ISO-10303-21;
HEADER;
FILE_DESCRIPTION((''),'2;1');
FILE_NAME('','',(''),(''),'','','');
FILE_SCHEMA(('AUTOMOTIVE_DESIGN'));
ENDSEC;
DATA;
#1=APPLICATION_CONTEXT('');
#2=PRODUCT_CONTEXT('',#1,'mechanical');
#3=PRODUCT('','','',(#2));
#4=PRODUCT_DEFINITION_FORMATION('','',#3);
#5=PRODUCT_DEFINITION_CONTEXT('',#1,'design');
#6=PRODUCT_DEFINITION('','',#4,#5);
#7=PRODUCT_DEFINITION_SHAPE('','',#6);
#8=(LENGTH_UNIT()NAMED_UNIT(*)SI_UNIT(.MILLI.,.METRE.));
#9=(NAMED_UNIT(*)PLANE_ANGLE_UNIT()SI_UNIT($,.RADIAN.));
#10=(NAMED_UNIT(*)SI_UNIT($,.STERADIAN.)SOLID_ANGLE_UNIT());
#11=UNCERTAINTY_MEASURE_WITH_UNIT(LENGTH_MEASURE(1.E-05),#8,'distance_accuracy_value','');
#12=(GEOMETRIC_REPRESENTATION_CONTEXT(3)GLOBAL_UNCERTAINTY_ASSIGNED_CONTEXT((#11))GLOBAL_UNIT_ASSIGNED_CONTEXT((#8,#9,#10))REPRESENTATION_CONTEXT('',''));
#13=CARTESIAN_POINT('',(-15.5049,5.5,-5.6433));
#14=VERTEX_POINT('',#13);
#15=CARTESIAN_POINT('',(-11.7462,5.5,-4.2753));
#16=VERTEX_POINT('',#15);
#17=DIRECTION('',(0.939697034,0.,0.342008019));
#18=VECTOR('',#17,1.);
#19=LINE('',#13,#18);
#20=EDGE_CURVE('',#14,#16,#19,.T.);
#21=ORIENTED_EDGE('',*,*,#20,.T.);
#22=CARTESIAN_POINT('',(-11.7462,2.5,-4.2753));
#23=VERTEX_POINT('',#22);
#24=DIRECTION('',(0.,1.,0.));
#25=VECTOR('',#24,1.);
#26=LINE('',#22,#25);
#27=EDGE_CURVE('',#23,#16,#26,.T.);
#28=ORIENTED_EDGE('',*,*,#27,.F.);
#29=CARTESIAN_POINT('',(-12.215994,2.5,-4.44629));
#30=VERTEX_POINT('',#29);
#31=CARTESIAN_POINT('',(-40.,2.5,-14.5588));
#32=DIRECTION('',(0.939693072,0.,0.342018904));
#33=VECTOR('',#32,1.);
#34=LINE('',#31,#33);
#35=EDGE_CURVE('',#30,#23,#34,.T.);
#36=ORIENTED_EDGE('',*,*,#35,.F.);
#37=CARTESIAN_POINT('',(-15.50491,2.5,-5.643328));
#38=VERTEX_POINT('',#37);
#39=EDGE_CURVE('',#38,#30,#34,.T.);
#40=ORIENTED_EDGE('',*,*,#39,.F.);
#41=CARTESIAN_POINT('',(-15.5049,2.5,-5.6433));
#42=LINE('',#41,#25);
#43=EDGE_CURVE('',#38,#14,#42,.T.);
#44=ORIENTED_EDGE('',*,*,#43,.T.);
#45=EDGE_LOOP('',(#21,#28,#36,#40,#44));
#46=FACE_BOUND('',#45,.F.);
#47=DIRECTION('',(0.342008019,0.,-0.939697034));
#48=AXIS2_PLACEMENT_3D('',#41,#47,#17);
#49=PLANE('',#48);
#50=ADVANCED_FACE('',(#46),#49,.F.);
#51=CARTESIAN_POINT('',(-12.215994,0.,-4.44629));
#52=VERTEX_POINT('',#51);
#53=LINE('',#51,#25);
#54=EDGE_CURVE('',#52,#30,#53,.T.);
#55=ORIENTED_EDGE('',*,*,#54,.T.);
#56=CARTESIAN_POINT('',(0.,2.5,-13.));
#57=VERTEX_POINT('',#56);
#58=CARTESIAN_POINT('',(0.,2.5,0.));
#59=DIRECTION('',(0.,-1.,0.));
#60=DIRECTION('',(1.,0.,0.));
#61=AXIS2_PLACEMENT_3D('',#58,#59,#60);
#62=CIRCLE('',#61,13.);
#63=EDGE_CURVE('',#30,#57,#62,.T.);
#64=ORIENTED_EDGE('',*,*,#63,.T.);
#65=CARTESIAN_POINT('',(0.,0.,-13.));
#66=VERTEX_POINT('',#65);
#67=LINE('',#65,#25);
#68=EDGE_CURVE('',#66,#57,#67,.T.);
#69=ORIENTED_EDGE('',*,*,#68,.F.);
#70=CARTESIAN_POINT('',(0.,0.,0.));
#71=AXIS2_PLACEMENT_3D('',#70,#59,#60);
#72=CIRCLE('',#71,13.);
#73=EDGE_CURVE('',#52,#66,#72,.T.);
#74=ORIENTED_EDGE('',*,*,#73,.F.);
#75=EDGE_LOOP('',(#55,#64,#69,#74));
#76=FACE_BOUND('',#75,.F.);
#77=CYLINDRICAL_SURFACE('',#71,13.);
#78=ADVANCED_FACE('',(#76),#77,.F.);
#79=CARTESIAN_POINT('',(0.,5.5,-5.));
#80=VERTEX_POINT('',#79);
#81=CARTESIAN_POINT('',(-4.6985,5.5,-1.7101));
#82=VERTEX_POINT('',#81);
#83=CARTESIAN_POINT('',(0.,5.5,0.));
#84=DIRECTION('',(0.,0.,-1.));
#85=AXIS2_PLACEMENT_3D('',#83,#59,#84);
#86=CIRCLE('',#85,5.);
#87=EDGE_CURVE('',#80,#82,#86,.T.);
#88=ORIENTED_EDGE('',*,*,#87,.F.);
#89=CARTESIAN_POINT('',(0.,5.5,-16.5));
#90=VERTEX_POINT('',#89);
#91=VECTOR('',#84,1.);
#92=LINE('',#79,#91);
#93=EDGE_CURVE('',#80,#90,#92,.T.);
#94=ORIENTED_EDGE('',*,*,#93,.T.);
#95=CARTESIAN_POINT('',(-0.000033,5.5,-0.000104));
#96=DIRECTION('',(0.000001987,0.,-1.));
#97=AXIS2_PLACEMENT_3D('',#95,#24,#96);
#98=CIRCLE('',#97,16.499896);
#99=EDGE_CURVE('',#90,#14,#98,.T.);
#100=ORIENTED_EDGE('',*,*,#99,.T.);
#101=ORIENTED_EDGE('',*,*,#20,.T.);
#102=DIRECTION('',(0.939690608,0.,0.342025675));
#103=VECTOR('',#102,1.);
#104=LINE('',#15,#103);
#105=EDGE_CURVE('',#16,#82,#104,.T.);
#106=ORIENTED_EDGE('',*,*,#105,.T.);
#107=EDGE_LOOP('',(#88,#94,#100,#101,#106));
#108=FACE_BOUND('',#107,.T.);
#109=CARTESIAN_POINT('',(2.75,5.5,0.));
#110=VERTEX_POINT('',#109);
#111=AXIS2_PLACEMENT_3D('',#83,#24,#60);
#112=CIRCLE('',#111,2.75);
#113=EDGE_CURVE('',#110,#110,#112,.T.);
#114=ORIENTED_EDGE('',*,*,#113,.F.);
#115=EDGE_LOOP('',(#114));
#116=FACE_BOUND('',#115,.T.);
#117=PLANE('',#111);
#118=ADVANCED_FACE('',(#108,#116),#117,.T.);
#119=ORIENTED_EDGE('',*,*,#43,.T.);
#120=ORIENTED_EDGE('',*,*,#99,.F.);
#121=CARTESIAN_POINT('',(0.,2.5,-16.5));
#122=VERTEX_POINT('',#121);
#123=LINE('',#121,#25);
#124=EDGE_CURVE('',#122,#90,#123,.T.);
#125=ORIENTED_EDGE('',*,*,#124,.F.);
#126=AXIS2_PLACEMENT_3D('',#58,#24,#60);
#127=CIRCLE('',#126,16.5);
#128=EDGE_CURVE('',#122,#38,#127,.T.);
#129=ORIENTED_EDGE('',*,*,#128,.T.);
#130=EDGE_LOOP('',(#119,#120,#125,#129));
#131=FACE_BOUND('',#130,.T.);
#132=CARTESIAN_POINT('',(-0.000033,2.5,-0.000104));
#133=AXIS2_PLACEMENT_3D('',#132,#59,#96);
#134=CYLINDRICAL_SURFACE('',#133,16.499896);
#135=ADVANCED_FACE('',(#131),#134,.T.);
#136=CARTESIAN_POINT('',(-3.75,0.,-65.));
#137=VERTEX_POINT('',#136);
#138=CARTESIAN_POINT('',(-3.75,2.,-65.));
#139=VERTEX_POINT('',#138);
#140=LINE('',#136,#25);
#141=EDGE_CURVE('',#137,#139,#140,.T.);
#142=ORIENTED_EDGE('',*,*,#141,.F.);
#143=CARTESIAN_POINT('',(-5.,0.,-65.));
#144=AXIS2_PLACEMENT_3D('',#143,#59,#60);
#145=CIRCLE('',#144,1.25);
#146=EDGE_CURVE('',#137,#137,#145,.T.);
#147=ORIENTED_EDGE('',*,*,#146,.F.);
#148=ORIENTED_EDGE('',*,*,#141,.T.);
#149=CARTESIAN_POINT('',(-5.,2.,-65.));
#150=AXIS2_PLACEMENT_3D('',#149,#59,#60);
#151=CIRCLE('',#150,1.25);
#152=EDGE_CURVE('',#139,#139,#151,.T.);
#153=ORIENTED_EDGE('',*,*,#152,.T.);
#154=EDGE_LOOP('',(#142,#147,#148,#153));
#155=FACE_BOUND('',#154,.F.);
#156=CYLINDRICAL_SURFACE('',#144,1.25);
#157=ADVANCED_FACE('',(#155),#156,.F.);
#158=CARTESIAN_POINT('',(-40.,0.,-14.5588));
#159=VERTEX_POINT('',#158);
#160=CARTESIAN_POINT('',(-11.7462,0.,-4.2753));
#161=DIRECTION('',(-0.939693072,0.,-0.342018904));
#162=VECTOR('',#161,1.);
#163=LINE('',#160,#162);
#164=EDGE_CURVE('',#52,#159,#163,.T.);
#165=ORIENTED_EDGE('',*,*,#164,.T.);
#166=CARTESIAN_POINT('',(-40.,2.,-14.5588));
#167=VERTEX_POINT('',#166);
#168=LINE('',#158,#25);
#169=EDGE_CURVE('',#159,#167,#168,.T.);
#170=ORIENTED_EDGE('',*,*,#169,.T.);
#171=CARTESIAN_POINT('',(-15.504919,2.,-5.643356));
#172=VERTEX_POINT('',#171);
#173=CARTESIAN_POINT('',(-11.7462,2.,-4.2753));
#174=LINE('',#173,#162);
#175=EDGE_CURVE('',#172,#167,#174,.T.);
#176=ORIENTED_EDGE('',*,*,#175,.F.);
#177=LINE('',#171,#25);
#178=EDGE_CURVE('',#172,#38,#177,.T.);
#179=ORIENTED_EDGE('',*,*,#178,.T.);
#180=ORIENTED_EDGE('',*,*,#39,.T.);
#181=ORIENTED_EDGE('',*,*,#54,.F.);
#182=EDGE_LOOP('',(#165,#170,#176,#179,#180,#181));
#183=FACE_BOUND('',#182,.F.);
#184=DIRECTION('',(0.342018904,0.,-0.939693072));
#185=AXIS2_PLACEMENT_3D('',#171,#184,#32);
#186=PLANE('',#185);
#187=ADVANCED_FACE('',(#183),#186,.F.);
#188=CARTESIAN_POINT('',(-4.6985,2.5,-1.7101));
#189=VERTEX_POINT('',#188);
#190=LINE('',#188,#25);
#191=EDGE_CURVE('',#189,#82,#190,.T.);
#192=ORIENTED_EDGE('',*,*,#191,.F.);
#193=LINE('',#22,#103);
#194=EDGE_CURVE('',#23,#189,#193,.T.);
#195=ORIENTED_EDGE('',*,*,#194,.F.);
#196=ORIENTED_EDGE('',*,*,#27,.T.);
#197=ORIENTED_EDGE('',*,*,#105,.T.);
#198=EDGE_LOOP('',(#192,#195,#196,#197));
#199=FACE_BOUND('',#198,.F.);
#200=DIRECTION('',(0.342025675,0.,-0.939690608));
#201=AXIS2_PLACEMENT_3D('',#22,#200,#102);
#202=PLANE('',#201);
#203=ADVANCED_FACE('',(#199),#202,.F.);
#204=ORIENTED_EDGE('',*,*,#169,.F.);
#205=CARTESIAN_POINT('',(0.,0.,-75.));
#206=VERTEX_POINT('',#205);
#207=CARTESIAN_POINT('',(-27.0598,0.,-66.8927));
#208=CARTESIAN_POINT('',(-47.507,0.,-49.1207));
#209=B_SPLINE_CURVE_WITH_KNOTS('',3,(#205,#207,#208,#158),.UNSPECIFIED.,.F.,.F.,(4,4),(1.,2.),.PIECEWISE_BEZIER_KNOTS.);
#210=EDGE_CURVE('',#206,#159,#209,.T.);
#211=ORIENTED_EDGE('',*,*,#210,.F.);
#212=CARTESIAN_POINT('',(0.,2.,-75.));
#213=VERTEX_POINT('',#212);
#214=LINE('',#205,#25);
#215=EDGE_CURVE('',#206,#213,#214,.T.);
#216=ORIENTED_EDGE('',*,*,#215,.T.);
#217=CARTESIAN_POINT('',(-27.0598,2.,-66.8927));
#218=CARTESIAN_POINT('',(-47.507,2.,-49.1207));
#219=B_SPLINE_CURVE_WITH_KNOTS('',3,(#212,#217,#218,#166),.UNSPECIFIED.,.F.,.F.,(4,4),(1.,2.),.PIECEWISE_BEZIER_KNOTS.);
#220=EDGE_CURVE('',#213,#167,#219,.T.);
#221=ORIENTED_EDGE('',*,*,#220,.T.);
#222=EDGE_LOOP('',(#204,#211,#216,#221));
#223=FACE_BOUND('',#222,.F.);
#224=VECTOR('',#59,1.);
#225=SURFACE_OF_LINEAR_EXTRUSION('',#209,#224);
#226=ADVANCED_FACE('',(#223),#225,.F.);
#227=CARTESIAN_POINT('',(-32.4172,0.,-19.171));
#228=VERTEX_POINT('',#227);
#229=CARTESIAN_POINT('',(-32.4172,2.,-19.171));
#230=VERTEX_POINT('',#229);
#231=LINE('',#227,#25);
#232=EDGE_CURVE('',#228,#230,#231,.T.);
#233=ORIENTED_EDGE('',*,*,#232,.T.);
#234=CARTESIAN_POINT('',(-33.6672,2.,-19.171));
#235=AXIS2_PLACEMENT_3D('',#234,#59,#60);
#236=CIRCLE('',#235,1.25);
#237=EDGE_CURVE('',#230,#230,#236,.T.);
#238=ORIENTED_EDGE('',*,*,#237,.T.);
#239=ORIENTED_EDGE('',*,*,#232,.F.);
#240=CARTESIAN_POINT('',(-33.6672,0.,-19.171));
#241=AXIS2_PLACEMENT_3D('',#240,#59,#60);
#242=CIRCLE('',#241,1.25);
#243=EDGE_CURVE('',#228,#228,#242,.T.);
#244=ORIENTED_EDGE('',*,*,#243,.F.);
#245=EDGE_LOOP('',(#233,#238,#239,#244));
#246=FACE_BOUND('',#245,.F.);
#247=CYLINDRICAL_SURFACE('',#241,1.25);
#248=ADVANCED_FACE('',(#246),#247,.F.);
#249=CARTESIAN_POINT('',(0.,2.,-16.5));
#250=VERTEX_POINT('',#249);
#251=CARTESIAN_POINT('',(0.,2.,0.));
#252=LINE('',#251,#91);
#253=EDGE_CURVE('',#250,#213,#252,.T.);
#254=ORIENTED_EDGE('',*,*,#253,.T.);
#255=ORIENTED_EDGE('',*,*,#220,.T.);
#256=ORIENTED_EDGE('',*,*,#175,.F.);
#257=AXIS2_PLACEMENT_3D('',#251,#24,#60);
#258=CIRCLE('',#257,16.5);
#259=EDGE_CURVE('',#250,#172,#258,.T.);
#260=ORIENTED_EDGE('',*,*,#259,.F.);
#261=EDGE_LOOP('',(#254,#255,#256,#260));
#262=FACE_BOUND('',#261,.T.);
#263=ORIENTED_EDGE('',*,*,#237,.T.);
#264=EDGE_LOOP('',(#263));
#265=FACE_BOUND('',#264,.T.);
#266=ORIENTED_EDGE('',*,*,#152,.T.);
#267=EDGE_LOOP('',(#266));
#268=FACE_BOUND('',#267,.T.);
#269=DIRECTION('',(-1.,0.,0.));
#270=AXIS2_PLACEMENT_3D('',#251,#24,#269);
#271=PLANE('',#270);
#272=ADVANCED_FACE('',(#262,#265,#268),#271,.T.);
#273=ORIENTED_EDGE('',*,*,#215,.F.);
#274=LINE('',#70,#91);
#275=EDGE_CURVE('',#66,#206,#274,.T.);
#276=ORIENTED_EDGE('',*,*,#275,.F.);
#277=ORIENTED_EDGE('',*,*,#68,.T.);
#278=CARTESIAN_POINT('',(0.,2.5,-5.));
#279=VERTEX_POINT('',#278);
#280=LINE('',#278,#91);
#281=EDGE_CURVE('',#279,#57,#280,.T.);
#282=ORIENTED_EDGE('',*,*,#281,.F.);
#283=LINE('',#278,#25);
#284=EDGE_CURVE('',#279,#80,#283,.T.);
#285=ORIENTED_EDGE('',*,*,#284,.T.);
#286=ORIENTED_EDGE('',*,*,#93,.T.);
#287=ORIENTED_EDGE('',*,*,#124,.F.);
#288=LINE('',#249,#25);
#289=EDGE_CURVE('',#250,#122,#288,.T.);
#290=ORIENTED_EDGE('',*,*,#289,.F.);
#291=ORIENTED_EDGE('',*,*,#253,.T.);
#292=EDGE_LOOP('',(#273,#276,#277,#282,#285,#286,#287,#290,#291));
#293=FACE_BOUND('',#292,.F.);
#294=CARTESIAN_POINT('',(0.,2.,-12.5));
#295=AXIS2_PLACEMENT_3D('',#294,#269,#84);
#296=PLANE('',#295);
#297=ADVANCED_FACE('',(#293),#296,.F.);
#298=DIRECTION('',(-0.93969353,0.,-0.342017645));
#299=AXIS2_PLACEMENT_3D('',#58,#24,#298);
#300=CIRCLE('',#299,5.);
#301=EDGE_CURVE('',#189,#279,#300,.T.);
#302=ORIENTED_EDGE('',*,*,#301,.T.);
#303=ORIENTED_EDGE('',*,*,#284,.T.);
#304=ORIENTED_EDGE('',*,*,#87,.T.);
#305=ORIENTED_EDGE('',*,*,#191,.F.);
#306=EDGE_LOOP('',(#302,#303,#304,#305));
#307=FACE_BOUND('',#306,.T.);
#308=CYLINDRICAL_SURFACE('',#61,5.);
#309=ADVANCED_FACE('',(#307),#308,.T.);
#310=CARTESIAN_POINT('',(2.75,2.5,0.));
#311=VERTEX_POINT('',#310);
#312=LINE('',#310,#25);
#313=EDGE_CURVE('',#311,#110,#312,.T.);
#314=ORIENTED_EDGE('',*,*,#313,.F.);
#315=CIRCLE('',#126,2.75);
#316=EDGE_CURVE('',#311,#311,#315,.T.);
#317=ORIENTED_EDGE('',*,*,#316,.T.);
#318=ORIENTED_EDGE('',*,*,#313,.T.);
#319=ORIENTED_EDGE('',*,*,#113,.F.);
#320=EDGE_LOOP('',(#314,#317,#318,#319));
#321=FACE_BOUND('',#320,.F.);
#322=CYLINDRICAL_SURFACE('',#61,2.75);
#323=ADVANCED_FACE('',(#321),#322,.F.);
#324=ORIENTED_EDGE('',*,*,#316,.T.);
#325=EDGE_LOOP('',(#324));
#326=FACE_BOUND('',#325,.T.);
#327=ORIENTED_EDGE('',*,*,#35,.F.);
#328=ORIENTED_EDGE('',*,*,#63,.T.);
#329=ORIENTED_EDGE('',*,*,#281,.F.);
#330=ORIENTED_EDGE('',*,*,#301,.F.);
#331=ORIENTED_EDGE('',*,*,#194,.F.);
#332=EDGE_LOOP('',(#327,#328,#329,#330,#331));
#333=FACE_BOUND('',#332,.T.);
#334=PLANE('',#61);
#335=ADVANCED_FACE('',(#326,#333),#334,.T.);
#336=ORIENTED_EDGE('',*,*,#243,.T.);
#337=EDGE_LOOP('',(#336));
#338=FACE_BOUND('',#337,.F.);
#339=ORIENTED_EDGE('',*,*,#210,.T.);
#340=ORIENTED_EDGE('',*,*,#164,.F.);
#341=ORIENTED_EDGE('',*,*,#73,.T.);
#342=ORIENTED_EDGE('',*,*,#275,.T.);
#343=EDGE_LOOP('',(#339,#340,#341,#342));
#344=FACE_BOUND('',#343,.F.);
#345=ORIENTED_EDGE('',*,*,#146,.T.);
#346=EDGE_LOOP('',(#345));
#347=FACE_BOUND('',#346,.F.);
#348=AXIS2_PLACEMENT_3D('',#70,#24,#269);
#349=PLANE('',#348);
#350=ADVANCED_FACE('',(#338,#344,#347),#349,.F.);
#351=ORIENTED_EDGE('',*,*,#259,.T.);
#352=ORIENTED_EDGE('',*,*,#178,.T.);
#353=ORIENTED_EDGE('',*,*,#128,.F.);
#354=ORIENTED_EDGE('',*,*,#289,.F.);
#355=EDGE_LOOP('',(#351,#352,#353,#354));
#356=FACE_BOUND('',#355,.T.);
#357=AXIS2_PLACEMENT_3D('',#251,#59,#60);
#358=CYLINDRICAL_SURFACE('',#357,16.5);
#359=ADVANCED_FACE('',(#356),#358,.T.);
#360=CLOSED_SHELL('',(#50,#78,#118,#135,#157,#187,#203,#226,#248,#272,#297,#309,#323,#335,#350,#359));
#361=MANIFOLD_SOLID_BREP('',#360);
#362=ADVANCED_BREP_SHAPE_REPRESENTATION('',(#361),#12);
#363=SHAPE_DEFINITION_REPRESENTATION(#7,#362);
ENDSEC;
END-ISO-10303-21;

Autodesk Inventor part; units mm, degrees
ref_plane "YZ Plane" through (0, 0, 0) normal (1, 0, 0) x (0, 1, 0)
ref_plane "XZ Plane" through (0, 0, 0) normal (0, 1, 0) x (-1, 0, 0)
ref_plane "XY Plane" through (0, 0, 0) normal (0, 0, 1) x (1, 0, 0)
sketch "Sketch1" plane through (0, 0, 0) normal (0, 1, 0) x (-1, 0, 0)
  circle A0 centre (0, 0) radius 12.5
  line L0 (11.7462, -4.2753) -> (40, -14.5588)
  line L1 (0, 0) -> (41.7481, 0) construction
  line L2 (0, 0) -> (11.7462, -4.2753) construction
  line L3 (0, 0) -> (0, -75)
  line L4 (0, -75) -> (27.0598, -66.8927) construction
  line L5 (27.0598, -66.8927) -> (47.507, -49.1207) construction
  line L6 (47.507, -49.1207) -> (40, -14.5588) construction
  spline S0 degree 3 poles (0, -75) (27.0598, -66.8927) (47.507, -49.1207) (40, -14.5588) knots 1 1 1 1 2 2 2 2
  point P0 (0, -12.5)
  dimension "d0" = 25
  dimension "d1" = 40
  dimension "d3" = 20
  dimension "d4" = 75
extrude "Extrusion1" add sketch "Sketch1" along normal blind 2
sketch "Sketch2" plane through (0, 0, 0) normal (0, -1, 0) x (1, 0, 0)
  circle A0 centre (0, 0) radius 2.5
  dimension "d7" = 5
extrude "Extrusion2" add sketch "Sketch2" along normal blind 4
sketch "Sketch3" plane through (0, 0, 0) normal (0, -1, 0) x (1, 0, 0)
  arc A0 (11.7462, -4.2753) -> (0, -12.5) centre (0, 0) ccw projected
  arc A1 (0, -12.5) -> (-11.7462, -4.2753) centre (0, 0) ccw projected
extrude "Extrusion3" cut sketch "Sketch3" against normal mid plane 10
sketch "Sketch4" plane through (0, 2, 0) normal (0, 1, 0) x (1, 0, 0)
  circle A0 centre (0, 0) radius 16.5
  arc A1 (0, 12.5) -> (-11.7462, 4.2753) centre (0, 0) ccw projected
  circle A2 centre (0, 0) radius 4.8598
  line L0 (-40, 14.5588) -> (-11.7462, 4.2753) projected
  line L1 (0, 12.5) -> (0, 75) projected
  point P0 (0, 16.5)
  point P1 (-15.5049, 5.6433)
  dimension "d12" = 4
  dimension "d13" = 9.7195
extrude "Extrusion4" add sketch "Sketch4" along normal blind 0.5 contours L1 A1 L0 A0 picked at (-4.9207, 14.2357)
sketch "Sketch5" plane through (0, 2.5, 0) normal (0, 1, 0) x (1, 0, 0)
  circle A0 centre (0, 0) radius 5
  arc A1 (0, 12.5) -> (-11.7462, 4.2753) centre (0, 0) ccw projected
  line L0 (0, 5) -> (0, 12.5)
  line L1 (-11.7462, 4.2753) -> (-4.6985, 1.7101)
  line L2 (-15.5049, 5.6433) -> (-11.7462, 4.2753) projected
  line L3 (0, 12.5) -> (0, 16.5) projected
  arc A2 (0, 16.5) -> (-15.5049, 5.6433) centre (0, 0) ccw projected
  circle A3 centre (0, 0) radius 2.75
  dimension "d16" = 10
  dimension "d17" = 5.5
extrude "Extrusion5" add sketch "Sketch5" along normal blind 3
sketch "Sketch6" plane through (0, 0, 0) normal (0, -1, 0) x (1, 0, 0)
  arc A0 (-11.7462, -4.2753) -> (0, -12.5) centre (0, 0) ccw projected
  line L0 (0, -12.5) -> (0, -75) projected
  line L1 (-40, -14.5588) -> (-11.7462, -4.2753) projected
  circle A1 centre (0, 0) radius 2.75 projected
  circle A2 centre (0, 0) radius 13
  point P0 (-12.216, -4.4463)
  point P1 (0, -13)
  dimension "d20" = 0.5
extrude "Extrusion6" cut sketch "Sketch6" against normal up to surface (2.5 mm away) contours A0 L0 A2 L1 picked at (-1.0483, -12.7046)
sketch "Sketch7" plane through (0, 0, 0) normal (0, -1, 0) x (1, 0, 0)
  circle A0 centre (-5, -65) radius 1.25
  circle A1 centre (-33.6672, -19.171) radius 1.25
  line L0 (-40, -14.5588) -> (-12.216, -4.4463) projected
  point P0 (0, 0)
  dimension "d23" = 6.5
  dimension "d24" = 19.171
  dimension "d25" = 2.5
  dimension "d26" = 65
  dimension "d27" = 5
extrude "Extrusion7" cut sketch "Sketch7" against normal up to surface (2 mm away)
equation "\"d28\" = d25"
properties part number "clamshell half-2" material "ABS Plastic"
